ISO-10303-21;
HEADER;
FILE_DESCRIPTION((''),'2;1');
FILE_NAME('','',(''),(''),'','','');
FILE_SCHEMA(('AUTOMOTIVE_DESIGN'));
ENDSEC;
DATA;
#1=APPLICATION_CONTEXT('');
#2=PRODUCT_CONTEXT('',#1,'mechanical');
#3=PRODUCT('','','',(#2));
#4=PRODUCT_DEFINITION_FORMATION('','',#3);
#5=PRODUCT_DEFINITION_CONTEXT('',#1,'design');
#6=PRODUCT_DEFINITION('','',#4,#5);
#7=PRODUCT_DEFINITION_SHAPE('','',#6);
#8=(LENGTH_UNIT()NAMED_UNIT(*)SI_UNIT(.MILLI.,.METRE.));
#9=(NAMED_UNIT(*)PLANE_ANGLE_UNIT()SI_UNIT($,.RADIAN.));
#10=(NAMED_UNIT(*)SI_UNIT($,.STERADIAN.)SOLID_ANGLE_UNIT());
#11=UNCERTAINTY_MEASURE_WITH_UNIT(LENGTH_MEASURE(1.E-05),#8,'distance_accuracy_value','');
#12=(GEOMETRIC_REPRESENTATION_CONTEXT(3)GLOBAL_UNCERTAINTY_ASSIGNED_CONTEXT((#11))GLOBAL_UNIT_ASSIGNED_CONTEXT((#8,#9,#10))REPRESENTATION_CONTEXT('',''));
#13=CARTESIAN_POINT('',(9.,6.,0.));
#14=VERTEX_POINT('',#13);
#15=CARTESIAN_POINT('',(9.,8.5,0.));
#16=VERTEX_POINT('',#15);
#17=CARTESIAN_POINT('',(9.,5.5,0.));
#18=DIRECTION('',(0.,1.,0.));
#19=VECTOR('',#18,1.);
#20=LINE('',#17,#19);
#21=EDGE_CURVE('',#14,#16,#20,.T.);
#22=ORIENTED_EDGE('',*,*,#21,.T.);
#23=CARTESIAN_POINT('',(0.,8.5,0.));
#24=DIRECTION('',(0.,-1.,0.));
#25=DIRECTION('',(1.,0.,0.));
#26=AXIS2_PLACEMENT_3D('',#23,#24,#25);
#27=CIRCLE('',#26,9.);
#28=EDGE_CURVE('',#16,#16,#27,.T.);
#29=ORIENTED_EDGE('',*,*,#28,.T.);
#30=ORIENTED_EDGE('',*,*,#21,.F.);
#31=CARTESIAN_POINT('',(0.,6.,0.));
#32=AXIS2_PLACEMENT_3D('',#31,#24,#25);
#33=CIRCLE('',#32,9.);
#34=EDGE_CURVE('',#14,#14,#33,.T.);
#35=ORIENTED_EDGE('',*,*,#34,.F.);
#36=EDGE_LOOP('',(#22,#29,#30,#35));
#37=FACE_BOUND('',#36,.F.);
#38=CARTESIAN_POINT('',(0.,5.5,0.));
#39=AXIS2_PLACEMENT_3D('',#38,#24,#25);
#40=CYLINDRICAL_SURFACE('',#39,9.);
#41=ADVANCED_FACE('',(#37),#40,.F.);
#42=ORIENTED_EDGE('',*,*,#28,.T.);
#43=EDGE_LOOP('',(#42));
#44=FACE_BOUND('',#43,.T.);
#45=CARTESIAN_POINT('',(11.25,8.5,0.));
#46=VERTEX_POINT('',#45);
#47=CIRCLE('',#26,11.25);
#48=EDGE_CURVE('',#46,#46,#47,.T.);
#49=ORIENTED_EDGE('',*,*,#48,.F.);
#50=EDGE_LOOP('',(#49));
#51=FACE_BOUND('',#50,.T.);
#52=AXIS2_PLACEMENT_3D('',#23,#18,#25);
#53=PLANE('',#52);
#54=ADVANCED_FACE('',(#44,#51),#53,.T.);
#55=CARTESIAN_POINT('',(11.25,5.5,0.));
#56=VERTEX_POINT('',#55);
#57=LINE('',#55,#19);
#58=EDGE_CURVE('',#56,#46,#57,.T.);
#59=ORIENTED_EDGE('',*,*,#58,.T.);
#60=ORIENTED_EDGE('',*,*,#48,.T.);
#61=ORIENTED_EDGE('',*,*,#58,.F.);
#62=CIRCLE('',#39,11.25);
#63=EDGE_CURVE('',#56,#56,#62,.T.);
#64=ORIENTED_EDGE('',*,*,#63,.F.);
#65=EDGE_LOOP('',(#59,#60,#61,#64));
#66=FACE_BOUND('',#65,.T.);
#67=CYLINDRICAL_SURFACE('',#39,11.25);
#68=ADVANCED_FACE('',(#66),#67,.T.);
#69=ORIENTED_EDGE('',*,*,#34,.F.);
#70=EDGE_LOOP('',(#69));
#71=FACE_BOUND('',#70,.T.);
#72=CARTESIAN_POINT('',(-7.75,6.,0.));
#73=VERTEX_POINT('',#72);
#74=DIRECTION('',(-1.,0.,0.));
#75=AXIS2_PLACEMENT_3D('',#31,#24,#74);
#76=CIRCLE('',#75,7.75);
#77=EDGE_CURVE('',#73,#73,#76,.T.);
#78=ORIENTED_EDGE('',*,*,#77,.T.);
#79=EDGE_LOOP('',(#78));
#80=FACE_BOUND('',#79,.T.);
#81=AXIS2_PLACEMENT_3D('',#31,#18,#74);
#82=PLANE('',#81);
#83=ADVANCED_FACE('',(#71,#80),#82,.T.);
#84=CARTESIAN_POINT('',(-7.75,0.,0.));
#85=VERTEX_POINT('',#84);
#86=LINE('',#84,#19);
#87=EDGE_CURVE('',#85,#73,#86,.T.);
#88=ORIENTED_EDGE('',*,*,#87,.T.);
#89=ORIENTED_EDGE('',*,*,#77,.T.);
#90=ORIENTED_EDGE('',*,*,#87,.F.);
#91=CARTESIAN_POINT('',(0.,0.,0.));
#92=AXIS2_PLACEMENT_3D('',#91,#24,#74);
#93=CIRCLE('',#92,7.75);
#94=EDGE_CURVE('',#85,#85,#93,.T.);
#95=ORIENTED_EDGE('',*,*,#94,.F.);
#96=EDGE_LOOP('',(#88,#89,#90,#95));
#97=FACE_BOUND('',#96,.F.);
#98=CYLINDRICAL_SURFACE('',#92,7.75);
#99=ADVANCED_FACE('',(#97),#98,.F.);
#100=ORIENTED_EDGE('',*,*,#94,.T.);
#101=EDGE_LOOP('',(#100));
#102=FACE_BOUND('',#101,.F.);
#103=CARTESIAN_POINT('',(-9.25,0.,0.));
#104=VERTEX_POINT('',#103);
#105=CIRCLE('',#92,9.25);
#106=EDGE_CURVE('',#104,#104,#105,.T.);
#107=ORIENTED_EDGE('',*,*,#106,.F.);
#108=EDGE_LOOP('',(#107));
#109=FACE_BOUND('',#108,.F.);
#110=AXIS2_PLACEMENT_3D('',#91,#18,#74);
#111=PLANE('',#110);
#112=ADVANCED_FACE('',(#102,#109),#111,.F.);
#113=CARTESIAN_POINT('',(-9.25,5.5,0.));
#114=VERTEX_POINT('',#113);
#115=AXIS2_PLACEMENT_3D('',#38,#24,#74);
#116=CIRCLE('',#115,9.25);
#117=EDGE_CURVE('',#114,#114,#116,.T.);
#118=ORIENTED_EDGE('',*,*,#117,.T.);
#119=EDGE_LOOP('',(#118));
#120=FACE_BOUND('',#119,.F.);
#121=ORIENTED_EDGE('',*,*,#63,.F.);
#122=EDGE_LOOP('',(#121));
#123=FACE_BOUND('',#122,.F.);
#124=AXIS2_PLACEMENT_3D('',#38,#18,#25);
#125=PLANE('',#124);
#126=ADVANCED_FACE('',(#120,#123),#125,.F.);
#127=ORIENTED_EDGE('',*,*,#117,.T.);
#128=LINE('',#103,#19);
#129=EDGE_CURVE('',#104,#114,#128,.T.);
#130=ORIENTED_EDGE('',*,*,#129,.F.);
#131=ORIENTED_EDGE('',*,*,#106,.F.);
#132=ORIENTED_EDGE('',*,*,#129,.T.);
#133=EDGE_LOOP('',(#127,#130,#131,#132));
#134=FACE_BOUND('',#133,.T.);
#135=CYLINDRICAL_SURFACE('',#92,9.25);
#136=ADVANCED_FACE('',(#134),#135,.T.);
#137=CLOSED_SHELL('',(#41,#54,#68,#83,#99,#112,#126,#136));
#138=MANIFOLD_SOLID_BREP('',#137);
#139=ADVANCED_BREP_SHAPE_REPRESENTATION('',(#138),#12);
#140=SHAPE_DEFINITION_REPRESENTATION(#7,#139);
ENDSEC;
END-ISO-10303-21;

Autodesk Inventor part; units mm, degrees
ref_plane "YZ Plane" through (0, 0, 0) normal (1, 0, 0) x (0, 1, 0)
ref_plane "XZ Plane" through (0, 0, 0) normal (0, 1, 0) x (-1, 0, 0)
ref_plane "XY Plane" through (0, 0, 0) normal (0, 0, 1) x (1, 0, 0)
sketch "Sketch1" plane through (0, 0, 0) normal (0, 1, 0) x (-1, 0, 0)
  circle A0 centre (0, 0) radius 7.75
  circle A1 centre (0, 0) radius 9.25
  dimension "d0" = 15.5
  dimension "d1" = 18.5
extrude "Extrusion1" add sketch "Sketch1" along normal blind 5.5
sketch "Sketch5" plane through (0, 5.5, 0) normal (0, 1, 0) x (1, 0, 0)
  circle A0 centre (0, 0) radius 11.25
  circle A1 centre (0, 0) radius 9
  dimension "d13" = 22.5
  dimension "d14" = 18
extrude "Extrusion5" add sketch "Sketch5" along normal blind 3
move faces "Move1" translate (0, 0.5, 0) faces at (8.4211, 5.5, 1.3362)
properties part number "685ZZFlanged_Adapter_2mm"
